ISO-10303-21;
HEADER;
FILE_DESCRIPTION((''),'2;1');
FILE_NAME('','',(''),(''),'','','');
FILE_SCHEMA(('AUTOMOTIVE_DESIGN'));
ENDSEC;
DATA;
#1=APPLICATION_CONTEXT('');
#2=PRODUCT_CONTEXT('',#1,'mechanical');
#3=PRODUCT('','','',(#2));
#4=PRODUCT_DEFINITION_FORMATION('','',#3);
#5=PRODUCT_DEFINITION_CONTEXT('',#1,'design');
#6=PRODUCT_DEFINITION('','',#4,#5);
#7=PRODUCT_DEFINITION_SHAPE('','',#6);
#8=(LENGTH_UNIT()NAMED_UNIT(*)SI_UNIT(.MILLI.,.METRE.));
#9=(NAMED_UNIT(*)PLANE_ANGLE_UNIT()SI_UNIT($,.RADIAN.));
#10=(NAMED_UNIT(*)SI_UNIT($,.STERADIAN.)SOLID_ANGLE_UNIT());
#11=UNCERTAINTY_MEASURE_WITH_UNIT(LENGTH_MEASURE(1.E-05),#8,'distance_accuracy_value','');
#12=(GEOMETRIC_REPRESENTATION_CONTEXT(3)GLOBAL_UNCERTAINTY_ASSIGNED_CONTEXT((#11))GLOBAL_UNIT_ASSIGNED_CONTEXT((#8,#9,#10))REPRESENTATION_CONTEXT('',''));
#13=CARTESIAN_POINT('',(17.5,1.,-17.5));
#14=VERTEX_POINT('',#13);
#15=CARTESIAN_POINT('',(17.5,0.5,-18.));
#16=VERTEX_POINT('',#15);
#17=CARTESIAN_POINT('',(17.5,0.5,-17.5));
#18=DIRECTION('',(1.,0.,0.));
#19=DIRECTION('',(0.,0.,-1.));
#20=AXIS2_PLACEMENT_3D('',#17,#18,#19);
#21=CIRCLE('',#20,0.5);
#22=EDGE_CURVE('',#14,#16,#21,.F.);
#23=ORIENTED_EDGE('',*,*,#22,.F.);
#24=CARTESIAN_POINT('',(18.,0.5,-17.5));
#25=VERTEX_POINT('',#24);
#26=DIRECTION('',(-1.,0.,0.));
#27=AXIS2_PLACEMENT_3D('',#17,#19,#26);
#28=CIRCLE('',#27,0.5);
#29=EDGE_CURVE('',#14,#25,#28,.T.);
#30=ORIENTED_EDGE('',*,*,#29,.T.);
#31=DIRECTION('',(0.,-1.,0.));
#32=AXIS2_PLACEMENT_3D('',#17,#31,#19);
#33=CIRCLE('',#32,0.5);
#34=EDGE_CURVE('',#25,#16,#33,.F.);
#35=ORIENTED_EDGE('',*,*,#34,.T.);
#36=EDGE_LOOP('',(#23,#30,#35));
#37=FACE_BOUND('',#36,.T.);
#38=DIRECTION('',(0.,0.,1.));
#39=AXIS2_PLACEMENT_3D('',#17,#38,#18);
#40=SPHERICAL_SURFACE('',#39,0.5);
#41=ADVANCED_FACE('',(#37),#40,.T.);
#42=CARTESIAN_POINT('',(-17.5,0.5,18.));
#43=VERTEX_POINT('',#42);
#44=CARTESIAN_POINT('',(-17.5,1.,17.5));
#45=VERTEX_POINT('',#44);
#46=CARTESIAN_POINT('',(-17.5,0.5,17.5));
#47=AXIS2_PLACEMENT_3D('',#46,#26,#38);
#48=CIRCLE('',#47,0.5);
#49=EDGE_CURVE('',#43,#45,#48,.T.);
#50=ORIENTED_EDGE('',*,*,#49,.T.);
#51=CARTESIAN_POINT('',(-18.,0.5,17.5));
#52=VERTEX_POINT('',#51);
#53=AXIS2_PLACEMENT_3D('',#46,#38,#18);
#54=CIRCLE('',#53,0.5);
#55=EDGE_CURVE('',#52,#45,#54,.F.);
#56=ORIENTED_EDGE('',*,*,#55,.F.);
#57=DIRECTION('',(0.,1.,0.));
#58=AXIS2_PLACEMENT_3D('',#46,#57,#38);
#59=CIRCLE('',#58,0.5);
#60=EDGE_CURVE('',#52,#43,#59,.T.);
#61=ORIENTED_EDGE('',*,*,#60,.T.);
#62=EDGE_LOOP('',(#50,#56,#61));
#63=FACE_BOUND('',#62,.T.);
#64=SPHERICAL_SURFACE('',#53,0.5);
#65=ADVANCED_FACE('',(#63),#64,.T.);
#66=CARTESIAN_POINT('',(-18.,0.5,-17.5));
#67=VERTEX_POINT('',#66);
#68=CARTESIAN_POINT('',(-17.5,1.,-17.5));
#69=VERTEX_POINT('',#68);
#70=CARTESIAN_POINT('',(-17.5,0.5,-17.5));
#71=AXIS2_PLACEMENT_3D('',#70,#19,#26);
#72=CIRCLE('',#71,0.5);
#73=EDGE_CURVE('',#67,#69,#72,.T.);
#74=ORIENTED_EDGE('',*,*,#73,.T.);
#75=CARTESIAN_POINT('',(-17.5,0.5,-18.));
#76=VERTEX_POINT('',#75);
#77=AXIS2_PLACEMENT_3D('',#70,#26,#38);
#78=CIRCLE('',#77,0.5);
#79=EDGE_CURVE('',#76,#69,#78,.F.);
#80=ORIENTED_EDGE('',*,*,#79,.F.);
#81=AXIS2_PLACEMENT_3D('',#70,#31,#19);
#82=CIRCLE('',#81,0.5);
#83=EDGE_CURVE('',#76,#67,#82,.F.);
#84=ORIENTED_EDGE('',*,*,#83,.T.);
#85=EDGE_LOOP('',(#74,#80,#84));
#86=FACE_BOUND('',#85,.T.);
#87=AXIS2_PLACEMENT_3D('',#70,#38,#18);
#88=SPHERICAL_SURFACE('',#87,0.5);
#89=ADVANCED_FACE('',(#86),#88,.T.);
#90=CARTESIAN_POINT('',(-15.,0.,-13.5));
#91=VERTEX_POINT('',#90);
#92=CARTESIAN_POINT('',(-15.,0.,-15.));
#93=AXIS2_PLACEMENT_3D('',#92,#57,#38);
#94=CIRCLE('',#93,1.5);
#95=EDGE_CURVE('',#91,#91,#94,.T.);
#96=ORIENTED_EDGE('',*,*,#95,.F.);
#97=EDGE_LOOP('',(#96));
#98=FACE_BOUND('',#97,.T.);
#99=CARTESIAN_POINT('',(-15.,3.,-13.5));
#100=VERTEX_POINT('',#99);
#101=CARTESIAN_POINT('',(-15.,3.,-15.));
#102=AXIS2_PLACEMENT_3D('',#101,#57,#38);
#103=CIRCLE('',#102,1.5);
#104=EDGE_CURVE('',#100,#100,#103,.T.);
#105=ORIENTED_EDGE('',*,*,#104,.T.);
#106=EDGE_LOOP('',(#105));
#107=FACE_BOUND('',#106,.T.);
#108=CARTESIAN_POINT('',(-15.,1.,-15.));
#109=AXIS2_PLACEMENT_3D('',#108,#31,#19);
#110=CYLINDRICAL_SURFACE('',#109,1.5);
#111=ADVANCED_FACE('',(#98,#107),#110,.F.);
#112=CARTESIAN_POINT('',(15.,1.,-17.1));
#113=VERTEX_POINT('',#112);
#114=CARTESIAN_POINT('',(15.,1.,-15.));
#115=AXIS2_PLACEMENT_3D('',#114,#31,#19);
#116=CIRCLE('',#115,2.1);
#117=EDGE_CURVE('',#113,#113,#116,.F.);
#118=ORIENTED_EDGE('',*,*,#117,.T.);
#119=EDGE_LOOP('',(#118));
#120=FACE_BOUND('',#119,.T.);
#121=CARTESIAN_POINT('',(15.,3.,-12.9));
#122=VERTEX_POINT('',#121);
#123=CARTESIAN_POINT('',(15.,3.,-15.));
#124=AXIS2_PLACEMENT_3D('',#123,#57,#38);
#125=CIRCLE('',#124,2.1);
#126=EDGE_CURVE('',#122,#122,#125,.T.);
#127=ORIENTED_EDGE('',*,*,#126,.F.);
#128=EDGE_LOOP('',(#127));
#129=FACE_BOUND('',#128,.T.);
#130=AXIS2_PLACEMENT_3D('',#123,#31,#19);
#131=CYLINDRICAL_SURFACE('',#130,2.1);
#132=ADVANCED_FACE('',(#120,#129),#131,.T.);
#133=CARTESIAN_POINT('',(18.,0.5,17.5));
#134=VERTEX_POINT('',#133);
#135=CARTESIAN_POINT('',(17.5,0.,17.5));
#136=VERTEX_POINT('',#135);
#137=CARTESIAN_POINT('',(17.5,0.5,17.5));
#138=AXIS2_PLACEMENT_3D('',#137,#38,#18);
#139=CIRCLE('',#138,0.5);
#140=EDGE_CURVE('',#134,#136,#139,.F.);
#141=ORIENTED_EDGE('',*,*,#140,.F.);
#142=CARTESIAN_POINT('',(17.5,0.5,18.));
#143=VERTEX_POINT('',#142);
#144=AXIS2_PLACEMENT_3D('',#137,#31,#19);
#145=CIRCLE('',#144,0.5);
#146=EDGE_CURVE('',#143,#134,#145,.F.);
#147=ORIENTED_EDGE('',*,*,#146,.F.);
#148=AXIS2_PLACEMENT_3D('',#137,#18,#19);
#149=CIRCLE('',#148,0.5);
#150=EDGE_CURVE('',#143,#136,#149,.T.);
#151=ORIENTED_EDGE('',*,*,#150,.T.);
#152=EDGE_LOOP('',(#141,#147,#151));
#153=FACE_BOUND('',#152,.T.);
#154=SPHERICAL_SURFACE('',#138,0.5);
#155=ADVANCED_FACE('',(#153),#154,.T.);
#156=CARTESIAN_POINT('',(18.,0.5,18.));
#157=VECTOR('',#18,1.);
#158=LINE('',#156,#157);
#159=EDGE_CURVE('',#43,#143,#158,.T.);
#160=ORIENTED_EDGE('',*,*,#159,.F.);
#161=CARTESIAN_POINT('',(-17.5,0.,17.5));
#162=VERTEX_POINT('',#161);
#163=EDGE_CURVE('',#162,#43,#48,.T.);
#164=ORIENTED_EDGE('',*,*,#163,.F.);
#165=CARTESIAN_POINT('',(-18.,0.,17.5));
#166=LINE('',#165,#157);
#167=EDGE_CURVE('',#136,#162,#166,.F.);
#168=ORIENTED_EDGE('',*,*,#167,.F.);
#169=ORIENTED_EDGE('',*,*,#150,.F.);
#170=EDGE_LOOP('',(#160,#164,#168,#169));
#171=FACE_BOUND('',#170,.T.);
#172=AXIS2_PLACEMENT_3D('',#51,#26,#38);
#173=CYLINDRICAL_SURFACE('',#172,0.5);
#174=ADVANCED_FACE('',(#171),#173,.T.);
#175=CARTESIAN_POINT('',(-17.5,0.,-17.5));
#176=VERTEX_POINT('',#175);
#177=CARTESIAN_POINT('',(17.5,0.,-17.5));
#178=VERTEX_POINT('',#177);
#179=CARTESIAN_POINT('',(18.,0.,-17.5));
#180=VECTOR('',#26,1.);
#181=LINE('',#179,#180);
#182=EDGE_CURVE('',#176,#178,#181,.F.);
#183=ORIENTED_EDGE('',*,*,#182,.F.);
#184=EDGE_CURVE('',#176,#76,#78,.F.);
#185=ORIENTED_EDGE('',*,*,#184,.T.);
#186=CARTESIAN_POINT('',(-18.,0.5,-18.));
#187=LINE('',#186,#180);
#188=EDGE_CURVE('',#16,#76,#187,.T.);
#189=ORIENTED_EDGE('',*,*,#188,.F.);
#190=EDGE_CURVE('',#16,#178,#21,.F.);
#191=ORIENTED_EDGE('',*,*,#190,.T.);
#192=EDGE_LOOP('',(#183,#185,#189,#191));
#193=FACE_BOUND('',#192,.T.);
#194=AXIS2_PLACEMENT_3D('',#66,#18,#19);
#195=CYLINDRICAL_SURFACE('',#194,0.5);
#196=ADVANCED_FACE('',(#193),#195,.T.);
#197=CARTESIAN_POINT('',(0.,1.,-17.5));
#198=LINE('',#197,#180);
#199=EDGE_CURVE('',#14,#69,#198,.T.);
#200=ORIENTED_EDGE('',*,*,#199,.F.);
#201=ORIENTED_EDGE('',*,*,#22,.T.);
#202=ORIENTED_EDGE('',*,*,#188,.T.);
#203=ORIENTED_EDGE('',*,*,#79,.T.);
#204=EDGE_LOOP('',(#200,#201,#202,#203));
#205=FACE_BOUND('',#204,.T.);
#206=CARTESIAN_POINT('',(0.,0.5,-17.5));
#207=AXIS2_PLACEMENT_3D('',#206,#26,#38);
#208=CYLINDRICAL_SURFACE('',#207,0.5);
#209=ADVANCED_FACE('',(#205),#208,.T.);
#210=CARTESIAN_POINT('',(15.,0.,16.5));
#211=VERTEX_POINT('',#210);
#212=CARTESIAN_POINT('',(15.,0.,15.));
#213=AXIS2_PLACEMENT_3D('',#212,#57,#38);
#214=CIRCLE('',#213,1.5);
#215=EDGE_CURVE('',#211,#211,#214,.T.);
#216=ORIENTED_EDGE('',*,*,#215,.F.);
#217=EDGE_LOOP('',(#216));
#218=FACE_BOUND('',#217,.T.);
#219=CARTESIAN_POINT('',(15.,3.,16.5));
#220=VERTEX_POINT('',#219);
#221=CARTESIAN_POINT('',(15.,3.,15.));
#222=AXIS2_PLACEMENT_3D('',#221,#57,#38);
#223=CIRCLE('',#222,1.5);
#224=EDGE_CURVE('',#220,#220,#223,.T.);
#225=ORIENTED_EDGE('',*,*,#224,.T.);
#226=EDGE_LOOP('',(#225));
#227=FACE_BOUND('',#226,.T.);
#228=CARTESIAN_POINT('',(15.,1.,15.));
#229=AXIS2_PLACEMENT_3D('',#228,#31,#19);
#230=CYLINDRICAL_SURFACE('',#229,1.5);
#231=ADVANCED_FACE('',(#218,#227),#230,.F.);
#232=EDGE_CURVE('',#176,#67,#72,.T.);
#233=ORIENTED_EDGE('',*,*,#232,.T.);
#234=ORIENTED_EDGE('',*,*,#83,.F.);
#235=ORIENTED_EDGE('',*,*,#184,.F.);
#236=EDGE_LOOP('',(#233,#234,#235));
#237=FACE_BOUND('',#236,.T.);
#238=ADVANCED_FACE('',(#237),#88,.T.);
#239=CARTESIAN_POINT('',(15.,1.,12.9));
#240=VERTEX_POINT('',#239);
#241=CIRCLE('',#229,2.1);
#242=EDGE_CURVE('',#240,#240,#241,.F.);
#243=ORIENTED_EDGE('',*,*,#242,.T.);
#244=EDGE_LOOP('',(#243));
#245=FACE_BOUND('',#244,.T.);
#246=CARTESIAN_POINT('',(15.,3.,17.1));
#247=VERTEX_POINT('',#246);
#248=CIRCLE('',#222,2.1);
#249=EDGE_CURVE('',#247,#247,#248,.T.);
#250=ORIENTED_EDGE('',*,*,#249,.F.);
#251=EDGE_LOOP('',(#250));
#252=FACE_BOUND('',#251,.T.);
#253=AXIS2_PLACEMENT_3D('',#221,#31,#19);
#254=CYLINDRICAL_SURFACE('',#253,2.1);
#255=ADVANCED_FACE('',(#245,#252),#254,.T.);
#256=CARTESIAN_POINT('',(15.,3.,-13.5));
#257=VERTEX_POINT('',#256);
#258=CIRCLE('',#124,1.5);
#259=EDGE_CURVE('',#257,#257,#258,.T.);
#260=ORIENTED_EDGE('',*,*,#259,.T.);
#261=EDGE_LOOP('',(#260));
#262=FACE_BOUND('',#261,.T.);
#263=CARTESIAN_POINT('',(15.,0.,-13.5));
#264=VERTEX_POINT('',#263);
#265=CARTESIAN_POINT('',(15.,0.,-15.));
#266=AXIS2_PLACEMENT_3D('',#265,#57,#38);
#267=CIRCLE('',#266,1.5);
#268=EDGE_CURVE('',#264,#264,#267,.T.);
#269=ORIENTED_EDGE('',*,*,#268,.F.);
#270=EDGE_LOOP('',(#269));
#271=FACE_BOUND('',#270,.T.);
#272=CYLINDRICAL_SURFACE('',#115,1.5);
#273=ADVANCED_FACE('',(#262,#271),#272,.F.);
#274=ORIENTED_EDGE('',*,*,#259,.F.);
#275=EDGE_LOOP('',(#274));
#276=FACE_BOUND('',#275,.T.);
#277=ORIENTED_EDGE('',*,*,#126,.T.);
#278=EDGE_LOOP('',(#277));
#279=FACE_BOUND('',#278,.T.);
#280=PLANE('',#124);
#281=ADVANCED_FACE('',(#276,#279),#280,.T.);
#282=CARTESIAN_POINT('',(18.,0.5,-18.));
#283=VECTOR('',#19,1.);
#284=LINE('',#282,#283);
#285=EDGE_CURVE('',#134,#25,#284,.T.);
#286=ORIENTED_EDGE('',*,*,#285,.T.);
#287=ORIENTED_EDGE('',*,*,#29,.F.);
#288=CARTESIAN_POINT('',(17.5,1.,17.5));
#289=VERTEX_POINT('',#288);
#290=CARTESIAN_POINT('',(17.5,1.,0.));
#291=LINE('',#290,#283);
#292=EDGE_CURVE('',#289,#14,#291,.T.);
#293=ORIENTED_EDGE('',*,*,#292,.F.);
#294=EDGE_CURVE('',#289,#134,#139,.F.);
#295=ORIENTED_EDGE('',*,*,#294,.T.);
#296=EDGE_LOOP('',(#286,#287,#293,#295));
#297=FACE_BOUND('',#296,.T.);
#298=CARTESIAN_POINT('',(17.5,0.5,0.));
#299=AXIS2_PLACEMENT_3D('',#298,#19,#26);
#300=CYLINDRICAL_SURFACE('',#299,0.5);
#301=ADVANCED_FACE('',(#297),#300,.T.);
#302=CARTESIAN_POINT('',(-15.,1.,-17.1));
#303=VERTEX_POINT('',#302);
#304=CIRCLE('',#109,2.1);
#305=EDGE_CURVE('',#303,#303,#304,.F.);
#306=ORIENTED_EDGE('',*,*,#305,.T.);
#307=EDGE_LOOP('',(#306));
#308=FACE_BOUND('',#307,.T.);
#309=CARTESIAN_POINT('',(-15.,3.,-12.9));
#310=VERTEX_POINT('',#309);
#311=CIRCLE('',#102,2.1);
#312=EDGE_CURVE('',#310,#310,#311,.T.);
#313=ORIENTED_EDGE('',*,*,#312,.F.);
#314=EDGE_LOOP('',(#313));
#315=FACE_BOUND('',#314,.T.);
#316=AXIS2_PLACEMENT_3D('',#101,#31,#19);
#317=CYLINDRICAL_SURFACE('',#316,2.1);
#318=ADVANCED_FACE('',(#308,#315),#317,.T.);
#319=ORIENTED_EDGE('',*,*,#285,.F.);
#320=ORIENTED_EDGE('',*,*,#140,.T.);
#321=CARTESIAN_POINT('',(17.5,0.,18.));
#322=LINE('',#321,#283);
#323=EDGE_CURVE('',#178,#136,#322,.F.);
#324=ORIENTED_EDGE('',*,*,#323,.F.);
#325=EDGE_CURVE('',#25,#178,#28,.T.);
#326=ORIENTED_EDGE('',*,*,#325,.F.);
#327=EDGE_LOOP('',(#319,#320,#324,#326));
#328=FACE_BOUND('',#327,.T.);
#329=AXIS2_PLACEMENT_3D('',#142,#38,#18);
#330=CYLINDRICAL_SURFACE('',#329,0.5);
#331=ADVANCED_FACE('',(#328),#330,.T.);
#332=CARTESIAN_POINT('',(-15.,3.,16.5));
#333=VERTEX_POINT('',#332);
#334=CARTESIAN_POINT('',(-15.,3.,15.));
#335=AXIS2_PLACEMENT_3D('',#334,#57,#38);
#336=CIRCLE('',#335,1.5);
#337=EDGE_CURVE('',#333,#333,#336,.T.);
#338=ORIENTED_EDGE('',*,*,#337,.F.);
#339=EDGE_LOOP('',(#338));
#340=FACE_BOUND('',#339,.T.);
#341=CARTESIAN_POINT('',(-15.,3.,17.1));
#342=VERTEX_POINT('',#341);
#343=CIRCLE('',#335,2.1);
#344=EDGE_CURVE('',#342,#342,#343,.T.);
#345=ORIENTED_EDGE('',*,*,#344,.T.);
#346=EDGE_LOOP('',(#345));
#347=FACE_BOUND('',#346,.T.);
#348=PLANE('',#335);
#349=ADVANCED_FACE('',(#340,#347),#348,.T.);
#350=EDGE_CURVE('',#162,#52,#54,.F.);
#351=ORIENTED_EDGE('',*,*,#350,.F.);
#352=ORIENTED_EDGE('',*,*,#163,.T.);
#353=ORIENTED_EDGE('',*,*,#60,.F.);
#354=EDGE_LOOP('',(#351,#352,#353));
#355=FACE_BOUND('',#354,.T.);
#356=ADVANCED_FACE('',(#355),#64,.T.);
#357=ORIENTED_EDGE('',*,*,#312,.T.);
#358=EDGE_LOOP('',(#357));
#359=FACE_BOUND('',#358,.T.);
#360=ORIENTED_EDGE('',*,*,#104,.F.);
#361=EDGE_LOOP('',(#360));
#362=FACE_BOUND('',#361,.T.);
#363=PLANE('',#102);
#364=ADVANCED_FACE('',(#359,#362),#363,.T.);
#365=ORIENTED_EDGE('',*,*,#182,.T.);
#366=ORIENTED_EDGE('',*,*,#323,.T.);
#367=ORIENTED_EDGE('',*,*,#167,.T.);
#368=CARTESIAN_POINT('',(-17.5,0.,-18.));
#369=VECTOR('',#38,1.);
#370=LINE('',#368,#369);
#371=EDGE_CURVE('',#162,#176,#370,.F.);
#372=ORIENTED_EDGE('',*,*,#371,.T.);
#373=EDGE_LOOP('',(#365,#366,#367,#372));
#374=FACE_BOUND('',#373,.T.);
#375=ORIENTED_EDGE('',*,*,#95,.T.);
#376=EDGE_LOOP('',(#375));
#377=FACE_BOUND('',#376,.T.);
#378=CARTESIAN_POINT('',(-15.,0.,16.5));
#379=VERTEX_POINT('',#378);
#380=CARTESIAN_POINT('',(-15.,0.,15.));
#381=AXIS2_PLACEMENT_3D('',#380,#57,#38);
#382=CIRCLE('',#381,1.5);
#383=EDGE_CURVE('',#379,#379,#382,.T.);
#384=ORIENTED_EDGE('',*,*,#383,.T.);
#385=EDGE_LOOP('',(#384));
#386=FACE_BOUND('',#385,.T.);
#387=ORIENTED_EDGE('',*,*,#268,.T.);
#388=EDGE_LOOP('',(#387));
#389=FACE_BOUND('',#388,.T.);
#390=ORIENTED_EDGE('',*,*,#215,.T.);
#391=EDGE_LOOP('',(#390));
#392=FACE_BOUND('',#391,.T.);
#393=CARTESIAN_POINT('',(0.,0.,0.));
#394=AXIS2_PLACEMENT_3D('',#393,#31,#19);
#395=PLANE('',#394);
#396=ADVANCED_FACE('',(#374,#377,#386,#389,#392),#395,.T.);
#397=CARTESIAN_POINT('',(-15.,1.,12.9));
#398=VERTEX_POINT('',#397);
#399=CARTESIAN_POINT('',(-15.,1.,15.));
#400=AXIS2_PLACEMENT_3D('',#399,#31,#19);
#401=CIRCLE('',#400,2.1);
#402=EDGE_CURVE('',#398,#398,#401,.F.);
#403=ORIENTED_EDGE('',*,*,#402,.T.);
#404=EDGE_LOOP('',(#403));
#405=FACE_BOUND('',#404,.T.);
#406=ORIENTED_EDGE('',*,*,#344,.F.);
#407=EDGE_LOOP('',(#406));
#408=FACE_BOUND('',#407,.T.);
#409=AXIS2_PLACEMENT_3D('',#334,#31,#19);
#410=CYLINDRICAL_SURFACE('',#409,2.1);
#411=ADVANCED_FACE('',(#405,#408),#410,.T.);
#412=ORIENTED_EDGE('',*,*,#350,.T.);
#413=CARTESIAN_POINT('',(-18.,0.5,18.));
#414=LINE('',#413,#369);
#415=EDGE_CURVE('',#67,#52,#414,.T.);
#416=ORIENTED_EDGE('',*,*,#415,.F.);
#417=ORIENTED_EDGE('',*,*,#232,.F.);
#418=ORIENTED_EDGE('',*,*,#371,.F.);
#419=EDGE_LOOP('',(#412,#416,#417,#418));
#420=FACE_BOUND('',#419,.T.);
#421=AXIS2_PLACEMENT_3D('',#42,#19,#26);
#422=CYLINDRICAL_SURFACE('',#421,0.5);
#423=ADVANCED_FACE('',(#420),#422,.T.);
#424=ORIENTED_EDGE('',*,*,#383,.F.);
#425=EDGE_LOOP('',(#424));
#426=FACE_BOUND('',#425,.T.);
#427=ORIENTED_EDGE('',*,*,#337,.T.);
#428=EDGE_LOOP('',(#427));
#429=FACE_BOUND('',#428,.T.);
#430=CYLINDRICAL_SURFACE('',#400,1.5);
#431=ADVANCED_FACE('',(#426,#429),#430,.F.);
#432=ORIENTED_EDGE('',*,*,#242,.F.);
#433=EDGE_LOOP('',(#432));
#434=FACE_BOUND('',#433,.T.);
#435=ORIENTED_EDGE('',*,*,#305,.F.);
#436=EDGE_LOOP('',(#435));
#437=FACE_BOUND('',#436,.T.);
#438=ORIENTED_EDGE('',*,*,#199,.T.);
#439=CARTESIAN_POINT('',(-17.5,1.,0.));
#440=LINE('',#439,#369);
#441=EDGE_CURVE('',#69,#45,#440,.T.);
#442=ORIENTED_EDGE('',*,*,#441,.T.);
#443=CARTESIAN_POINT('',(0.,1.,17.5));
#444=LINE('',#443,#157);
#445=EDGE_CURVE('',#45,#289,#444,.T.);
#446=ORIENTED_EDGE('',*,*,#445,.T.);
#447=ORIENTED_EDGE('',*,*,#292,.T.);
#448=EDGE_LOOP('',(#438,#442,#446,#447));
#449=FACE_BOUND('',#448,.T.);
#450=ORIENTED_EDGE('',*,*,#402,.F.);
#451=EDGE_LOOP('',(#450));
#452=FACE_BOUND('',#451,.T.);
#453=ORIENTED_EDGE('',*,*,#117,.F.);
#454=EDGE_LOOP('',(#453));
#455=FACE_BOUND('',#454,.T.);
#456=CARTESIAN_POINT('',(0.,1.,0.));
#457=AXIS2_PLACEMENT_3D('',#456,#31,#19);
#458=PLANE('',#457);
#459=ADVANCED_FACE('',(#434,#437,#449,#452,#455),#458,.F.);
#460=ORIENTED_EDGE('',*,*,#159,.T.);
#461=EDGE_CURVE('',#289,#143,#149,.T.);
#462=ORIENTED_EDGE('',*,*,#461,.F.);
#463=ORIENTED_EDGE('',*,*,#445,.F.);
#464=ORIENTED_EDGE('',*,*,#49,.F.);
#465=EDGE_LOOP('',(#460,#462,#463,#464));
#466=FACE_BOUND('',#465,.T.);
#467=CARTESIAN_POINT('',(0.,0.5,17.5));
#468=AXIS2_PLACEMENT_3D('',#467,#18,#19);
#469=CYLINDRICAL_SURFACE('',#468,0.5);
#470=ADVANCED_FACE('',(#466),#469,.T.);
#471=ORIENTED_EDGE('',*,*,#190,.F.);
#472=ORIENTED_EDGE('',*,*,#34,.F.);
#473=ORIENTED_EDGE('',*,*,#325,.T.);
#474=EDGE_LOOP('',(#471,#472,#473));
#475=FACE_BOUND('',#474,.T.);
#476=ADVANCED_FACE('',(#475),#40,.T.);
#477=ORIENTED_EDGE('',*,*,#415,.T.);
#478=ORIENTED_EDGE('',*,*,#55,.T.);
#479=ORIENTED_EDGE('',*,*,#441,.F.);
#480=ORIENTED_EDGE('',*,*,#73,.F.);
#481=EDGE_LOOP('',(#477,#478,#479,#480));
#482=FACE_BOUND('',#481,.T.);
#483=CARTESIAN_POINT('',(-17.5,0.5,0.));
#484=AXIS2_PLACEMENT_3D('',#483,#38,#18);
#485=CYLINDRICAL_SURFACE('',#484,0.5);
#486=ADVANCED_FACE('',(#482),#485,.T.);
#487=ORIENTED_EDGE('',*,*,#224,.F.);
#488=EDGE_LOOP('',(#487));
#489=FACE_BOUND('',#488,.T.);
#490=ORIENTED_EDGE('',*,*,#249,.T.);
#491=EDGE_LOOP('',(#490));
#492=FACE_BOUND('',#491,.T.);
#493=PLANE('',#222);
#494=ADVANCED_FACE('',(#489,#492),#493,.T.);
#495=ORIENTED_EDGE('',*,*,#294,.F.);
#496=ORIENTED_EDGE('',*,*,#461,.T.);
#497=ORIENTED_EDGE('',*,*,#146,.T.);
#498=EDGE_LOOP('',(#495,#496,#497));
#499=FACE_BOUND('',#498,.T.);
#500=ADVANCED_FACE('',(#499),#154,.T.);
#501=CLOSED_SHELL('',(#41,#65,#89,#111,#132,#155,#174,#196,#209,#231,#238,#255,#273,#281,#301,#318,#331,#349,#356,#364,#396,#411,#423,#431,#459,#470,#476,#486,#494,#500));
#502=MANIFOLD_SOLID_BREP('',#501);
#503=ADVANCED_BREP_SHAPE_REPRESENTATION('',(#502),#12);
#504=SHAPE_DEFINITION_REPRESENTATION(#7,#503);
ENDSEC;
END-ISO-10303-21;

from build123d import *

# Parameters (mm, degrees)
SKETCH2_W               = 36
SKETCH2_H               = 36
SKETCH2_R               = 1.5
BOSS_EXTRUDE2_DEPTH     = 1
FILLET1_R               = 0.5
CROQUIS1_R              = 2.1
CROQUIS1_R_2            = 1.5
SALIENTE_EXTRUIR1_DEPTH = 2


with BuildPart() as part:
    # Sketch2 → Boss-Extrude2 (new body)
    with BuildSketch(Plane(origin=(0, 0, 0), x_dir=(1, 0, 0), z_dir=(0, 1, 0))):
        Rectangle(SKETCH2_W, SKETCH2_H)
        with Locations(Location((-15, 15, 0), (0, 0, 270))):
            Circle(SKETCH2_R, mode=Mode.SUBTRACT)
        with Locations(Location((-15, -15, 0), (0, 0, 270))):
            Circle(SKETCH2_R, mode=Mode.SUBTRACT)
        with Locations(Location((15, -15, 0), (0, 0, 270))):
            Circle(SKETCH2_R, mode=Mode.SUBTRACT)
        with Locations(Location((15, 15, 0), (0, 0, 270))):
            Circle(SKETCH2_R, mode=Mode.SUBTRACT)
    extrude(amount=BOSS_EXTRUDE2_DEPTH)

    # Fillet1
    fillet1_edges = [part.edges().sort_by_distance(p)[0] for p in [
        (-18, 1, 0),
        (0, 1, 18),
        (18, 1, 0),
        (0, 0, 18),
        (-18, 0, 0),
        (0, 0, -18),
        (18, 0, 0),
        (0, 1, -18),
        (18, 0.5, 18),
        (-18, 0.5, 18),
        (-18, 0.5, -18),
        (18, 0.5, -18),
    ]]
    fillet(fillet1_edges, radius=FILLET1_R - 0.0001)  # a hair under: the kernel refuses the full size

    # Croquis1 → Saliente-Extruir1 (add)
    # profile 1 of 4: a face of its own
    with BuildSketch(Plane(origin=(0, 1, 0), x_dir=(1, 0, 0), z_dir=(0, 1, 0))):
        with Locations(Location((-15, -15, 0), (0, 0, 90))):
            Circle(CROQUIS1_R)
        with Locations(Location((-15, -15, 0), (0, 0, 270))):
            Circle(CROQUIS1_R_2, mode=Mode.SUBTRACT)
    # profile 2 of 4: a face of its own
    with BuildSketch(Plane(origin=(0, 1, 0), x_dir=(1, 0, 0), z_dir=(0, 1, 0))):
        with Locations(Location((-15, 15, 0), (0, 0, 90))):
            Circle(CROQUIS1_R)
        with Locations(Location((-15, 15, 0), (0, 0, 270))):
            Circle(CROQUIS1_R_2, mode=Mode.SUBTRACT)
    # profile 3 of 4: a face of its own
    with BuildSketch(Plane(origin=(0, 1, 0), x_dir=(1, 0, 0), z_dir=(0, 1, 0))):
        with Locations(Location((15, 15, 0), (0, 0, 90))):
            Circle(CROQUIS1_R)
        with Locations(Location((15, 15, 0), (0, 0, 270))):
            Circle(CROQUIS1_R_2, mode=Mode.SUBTRACT)
    # profile 4 of 4: a face of its own
    with BuildSketch(Plane(origin=(0, 1, 0), x_dir=(1, 0, 0), z_dir=(0, 1, 0))):
        with Locations(Location((15, -15, 0), (0, 0, 90))):
            Circle(CROQUIS1_R)
        with Locations(Location((15, -15, 0), (0, 0, 270))):
            Circle(CROQUIS1_R_2, mode=Mode.SUBTRACT)
    extrude(amount=SALIENTE_EXTRUIR1_DEPTH)


solid = part.part
